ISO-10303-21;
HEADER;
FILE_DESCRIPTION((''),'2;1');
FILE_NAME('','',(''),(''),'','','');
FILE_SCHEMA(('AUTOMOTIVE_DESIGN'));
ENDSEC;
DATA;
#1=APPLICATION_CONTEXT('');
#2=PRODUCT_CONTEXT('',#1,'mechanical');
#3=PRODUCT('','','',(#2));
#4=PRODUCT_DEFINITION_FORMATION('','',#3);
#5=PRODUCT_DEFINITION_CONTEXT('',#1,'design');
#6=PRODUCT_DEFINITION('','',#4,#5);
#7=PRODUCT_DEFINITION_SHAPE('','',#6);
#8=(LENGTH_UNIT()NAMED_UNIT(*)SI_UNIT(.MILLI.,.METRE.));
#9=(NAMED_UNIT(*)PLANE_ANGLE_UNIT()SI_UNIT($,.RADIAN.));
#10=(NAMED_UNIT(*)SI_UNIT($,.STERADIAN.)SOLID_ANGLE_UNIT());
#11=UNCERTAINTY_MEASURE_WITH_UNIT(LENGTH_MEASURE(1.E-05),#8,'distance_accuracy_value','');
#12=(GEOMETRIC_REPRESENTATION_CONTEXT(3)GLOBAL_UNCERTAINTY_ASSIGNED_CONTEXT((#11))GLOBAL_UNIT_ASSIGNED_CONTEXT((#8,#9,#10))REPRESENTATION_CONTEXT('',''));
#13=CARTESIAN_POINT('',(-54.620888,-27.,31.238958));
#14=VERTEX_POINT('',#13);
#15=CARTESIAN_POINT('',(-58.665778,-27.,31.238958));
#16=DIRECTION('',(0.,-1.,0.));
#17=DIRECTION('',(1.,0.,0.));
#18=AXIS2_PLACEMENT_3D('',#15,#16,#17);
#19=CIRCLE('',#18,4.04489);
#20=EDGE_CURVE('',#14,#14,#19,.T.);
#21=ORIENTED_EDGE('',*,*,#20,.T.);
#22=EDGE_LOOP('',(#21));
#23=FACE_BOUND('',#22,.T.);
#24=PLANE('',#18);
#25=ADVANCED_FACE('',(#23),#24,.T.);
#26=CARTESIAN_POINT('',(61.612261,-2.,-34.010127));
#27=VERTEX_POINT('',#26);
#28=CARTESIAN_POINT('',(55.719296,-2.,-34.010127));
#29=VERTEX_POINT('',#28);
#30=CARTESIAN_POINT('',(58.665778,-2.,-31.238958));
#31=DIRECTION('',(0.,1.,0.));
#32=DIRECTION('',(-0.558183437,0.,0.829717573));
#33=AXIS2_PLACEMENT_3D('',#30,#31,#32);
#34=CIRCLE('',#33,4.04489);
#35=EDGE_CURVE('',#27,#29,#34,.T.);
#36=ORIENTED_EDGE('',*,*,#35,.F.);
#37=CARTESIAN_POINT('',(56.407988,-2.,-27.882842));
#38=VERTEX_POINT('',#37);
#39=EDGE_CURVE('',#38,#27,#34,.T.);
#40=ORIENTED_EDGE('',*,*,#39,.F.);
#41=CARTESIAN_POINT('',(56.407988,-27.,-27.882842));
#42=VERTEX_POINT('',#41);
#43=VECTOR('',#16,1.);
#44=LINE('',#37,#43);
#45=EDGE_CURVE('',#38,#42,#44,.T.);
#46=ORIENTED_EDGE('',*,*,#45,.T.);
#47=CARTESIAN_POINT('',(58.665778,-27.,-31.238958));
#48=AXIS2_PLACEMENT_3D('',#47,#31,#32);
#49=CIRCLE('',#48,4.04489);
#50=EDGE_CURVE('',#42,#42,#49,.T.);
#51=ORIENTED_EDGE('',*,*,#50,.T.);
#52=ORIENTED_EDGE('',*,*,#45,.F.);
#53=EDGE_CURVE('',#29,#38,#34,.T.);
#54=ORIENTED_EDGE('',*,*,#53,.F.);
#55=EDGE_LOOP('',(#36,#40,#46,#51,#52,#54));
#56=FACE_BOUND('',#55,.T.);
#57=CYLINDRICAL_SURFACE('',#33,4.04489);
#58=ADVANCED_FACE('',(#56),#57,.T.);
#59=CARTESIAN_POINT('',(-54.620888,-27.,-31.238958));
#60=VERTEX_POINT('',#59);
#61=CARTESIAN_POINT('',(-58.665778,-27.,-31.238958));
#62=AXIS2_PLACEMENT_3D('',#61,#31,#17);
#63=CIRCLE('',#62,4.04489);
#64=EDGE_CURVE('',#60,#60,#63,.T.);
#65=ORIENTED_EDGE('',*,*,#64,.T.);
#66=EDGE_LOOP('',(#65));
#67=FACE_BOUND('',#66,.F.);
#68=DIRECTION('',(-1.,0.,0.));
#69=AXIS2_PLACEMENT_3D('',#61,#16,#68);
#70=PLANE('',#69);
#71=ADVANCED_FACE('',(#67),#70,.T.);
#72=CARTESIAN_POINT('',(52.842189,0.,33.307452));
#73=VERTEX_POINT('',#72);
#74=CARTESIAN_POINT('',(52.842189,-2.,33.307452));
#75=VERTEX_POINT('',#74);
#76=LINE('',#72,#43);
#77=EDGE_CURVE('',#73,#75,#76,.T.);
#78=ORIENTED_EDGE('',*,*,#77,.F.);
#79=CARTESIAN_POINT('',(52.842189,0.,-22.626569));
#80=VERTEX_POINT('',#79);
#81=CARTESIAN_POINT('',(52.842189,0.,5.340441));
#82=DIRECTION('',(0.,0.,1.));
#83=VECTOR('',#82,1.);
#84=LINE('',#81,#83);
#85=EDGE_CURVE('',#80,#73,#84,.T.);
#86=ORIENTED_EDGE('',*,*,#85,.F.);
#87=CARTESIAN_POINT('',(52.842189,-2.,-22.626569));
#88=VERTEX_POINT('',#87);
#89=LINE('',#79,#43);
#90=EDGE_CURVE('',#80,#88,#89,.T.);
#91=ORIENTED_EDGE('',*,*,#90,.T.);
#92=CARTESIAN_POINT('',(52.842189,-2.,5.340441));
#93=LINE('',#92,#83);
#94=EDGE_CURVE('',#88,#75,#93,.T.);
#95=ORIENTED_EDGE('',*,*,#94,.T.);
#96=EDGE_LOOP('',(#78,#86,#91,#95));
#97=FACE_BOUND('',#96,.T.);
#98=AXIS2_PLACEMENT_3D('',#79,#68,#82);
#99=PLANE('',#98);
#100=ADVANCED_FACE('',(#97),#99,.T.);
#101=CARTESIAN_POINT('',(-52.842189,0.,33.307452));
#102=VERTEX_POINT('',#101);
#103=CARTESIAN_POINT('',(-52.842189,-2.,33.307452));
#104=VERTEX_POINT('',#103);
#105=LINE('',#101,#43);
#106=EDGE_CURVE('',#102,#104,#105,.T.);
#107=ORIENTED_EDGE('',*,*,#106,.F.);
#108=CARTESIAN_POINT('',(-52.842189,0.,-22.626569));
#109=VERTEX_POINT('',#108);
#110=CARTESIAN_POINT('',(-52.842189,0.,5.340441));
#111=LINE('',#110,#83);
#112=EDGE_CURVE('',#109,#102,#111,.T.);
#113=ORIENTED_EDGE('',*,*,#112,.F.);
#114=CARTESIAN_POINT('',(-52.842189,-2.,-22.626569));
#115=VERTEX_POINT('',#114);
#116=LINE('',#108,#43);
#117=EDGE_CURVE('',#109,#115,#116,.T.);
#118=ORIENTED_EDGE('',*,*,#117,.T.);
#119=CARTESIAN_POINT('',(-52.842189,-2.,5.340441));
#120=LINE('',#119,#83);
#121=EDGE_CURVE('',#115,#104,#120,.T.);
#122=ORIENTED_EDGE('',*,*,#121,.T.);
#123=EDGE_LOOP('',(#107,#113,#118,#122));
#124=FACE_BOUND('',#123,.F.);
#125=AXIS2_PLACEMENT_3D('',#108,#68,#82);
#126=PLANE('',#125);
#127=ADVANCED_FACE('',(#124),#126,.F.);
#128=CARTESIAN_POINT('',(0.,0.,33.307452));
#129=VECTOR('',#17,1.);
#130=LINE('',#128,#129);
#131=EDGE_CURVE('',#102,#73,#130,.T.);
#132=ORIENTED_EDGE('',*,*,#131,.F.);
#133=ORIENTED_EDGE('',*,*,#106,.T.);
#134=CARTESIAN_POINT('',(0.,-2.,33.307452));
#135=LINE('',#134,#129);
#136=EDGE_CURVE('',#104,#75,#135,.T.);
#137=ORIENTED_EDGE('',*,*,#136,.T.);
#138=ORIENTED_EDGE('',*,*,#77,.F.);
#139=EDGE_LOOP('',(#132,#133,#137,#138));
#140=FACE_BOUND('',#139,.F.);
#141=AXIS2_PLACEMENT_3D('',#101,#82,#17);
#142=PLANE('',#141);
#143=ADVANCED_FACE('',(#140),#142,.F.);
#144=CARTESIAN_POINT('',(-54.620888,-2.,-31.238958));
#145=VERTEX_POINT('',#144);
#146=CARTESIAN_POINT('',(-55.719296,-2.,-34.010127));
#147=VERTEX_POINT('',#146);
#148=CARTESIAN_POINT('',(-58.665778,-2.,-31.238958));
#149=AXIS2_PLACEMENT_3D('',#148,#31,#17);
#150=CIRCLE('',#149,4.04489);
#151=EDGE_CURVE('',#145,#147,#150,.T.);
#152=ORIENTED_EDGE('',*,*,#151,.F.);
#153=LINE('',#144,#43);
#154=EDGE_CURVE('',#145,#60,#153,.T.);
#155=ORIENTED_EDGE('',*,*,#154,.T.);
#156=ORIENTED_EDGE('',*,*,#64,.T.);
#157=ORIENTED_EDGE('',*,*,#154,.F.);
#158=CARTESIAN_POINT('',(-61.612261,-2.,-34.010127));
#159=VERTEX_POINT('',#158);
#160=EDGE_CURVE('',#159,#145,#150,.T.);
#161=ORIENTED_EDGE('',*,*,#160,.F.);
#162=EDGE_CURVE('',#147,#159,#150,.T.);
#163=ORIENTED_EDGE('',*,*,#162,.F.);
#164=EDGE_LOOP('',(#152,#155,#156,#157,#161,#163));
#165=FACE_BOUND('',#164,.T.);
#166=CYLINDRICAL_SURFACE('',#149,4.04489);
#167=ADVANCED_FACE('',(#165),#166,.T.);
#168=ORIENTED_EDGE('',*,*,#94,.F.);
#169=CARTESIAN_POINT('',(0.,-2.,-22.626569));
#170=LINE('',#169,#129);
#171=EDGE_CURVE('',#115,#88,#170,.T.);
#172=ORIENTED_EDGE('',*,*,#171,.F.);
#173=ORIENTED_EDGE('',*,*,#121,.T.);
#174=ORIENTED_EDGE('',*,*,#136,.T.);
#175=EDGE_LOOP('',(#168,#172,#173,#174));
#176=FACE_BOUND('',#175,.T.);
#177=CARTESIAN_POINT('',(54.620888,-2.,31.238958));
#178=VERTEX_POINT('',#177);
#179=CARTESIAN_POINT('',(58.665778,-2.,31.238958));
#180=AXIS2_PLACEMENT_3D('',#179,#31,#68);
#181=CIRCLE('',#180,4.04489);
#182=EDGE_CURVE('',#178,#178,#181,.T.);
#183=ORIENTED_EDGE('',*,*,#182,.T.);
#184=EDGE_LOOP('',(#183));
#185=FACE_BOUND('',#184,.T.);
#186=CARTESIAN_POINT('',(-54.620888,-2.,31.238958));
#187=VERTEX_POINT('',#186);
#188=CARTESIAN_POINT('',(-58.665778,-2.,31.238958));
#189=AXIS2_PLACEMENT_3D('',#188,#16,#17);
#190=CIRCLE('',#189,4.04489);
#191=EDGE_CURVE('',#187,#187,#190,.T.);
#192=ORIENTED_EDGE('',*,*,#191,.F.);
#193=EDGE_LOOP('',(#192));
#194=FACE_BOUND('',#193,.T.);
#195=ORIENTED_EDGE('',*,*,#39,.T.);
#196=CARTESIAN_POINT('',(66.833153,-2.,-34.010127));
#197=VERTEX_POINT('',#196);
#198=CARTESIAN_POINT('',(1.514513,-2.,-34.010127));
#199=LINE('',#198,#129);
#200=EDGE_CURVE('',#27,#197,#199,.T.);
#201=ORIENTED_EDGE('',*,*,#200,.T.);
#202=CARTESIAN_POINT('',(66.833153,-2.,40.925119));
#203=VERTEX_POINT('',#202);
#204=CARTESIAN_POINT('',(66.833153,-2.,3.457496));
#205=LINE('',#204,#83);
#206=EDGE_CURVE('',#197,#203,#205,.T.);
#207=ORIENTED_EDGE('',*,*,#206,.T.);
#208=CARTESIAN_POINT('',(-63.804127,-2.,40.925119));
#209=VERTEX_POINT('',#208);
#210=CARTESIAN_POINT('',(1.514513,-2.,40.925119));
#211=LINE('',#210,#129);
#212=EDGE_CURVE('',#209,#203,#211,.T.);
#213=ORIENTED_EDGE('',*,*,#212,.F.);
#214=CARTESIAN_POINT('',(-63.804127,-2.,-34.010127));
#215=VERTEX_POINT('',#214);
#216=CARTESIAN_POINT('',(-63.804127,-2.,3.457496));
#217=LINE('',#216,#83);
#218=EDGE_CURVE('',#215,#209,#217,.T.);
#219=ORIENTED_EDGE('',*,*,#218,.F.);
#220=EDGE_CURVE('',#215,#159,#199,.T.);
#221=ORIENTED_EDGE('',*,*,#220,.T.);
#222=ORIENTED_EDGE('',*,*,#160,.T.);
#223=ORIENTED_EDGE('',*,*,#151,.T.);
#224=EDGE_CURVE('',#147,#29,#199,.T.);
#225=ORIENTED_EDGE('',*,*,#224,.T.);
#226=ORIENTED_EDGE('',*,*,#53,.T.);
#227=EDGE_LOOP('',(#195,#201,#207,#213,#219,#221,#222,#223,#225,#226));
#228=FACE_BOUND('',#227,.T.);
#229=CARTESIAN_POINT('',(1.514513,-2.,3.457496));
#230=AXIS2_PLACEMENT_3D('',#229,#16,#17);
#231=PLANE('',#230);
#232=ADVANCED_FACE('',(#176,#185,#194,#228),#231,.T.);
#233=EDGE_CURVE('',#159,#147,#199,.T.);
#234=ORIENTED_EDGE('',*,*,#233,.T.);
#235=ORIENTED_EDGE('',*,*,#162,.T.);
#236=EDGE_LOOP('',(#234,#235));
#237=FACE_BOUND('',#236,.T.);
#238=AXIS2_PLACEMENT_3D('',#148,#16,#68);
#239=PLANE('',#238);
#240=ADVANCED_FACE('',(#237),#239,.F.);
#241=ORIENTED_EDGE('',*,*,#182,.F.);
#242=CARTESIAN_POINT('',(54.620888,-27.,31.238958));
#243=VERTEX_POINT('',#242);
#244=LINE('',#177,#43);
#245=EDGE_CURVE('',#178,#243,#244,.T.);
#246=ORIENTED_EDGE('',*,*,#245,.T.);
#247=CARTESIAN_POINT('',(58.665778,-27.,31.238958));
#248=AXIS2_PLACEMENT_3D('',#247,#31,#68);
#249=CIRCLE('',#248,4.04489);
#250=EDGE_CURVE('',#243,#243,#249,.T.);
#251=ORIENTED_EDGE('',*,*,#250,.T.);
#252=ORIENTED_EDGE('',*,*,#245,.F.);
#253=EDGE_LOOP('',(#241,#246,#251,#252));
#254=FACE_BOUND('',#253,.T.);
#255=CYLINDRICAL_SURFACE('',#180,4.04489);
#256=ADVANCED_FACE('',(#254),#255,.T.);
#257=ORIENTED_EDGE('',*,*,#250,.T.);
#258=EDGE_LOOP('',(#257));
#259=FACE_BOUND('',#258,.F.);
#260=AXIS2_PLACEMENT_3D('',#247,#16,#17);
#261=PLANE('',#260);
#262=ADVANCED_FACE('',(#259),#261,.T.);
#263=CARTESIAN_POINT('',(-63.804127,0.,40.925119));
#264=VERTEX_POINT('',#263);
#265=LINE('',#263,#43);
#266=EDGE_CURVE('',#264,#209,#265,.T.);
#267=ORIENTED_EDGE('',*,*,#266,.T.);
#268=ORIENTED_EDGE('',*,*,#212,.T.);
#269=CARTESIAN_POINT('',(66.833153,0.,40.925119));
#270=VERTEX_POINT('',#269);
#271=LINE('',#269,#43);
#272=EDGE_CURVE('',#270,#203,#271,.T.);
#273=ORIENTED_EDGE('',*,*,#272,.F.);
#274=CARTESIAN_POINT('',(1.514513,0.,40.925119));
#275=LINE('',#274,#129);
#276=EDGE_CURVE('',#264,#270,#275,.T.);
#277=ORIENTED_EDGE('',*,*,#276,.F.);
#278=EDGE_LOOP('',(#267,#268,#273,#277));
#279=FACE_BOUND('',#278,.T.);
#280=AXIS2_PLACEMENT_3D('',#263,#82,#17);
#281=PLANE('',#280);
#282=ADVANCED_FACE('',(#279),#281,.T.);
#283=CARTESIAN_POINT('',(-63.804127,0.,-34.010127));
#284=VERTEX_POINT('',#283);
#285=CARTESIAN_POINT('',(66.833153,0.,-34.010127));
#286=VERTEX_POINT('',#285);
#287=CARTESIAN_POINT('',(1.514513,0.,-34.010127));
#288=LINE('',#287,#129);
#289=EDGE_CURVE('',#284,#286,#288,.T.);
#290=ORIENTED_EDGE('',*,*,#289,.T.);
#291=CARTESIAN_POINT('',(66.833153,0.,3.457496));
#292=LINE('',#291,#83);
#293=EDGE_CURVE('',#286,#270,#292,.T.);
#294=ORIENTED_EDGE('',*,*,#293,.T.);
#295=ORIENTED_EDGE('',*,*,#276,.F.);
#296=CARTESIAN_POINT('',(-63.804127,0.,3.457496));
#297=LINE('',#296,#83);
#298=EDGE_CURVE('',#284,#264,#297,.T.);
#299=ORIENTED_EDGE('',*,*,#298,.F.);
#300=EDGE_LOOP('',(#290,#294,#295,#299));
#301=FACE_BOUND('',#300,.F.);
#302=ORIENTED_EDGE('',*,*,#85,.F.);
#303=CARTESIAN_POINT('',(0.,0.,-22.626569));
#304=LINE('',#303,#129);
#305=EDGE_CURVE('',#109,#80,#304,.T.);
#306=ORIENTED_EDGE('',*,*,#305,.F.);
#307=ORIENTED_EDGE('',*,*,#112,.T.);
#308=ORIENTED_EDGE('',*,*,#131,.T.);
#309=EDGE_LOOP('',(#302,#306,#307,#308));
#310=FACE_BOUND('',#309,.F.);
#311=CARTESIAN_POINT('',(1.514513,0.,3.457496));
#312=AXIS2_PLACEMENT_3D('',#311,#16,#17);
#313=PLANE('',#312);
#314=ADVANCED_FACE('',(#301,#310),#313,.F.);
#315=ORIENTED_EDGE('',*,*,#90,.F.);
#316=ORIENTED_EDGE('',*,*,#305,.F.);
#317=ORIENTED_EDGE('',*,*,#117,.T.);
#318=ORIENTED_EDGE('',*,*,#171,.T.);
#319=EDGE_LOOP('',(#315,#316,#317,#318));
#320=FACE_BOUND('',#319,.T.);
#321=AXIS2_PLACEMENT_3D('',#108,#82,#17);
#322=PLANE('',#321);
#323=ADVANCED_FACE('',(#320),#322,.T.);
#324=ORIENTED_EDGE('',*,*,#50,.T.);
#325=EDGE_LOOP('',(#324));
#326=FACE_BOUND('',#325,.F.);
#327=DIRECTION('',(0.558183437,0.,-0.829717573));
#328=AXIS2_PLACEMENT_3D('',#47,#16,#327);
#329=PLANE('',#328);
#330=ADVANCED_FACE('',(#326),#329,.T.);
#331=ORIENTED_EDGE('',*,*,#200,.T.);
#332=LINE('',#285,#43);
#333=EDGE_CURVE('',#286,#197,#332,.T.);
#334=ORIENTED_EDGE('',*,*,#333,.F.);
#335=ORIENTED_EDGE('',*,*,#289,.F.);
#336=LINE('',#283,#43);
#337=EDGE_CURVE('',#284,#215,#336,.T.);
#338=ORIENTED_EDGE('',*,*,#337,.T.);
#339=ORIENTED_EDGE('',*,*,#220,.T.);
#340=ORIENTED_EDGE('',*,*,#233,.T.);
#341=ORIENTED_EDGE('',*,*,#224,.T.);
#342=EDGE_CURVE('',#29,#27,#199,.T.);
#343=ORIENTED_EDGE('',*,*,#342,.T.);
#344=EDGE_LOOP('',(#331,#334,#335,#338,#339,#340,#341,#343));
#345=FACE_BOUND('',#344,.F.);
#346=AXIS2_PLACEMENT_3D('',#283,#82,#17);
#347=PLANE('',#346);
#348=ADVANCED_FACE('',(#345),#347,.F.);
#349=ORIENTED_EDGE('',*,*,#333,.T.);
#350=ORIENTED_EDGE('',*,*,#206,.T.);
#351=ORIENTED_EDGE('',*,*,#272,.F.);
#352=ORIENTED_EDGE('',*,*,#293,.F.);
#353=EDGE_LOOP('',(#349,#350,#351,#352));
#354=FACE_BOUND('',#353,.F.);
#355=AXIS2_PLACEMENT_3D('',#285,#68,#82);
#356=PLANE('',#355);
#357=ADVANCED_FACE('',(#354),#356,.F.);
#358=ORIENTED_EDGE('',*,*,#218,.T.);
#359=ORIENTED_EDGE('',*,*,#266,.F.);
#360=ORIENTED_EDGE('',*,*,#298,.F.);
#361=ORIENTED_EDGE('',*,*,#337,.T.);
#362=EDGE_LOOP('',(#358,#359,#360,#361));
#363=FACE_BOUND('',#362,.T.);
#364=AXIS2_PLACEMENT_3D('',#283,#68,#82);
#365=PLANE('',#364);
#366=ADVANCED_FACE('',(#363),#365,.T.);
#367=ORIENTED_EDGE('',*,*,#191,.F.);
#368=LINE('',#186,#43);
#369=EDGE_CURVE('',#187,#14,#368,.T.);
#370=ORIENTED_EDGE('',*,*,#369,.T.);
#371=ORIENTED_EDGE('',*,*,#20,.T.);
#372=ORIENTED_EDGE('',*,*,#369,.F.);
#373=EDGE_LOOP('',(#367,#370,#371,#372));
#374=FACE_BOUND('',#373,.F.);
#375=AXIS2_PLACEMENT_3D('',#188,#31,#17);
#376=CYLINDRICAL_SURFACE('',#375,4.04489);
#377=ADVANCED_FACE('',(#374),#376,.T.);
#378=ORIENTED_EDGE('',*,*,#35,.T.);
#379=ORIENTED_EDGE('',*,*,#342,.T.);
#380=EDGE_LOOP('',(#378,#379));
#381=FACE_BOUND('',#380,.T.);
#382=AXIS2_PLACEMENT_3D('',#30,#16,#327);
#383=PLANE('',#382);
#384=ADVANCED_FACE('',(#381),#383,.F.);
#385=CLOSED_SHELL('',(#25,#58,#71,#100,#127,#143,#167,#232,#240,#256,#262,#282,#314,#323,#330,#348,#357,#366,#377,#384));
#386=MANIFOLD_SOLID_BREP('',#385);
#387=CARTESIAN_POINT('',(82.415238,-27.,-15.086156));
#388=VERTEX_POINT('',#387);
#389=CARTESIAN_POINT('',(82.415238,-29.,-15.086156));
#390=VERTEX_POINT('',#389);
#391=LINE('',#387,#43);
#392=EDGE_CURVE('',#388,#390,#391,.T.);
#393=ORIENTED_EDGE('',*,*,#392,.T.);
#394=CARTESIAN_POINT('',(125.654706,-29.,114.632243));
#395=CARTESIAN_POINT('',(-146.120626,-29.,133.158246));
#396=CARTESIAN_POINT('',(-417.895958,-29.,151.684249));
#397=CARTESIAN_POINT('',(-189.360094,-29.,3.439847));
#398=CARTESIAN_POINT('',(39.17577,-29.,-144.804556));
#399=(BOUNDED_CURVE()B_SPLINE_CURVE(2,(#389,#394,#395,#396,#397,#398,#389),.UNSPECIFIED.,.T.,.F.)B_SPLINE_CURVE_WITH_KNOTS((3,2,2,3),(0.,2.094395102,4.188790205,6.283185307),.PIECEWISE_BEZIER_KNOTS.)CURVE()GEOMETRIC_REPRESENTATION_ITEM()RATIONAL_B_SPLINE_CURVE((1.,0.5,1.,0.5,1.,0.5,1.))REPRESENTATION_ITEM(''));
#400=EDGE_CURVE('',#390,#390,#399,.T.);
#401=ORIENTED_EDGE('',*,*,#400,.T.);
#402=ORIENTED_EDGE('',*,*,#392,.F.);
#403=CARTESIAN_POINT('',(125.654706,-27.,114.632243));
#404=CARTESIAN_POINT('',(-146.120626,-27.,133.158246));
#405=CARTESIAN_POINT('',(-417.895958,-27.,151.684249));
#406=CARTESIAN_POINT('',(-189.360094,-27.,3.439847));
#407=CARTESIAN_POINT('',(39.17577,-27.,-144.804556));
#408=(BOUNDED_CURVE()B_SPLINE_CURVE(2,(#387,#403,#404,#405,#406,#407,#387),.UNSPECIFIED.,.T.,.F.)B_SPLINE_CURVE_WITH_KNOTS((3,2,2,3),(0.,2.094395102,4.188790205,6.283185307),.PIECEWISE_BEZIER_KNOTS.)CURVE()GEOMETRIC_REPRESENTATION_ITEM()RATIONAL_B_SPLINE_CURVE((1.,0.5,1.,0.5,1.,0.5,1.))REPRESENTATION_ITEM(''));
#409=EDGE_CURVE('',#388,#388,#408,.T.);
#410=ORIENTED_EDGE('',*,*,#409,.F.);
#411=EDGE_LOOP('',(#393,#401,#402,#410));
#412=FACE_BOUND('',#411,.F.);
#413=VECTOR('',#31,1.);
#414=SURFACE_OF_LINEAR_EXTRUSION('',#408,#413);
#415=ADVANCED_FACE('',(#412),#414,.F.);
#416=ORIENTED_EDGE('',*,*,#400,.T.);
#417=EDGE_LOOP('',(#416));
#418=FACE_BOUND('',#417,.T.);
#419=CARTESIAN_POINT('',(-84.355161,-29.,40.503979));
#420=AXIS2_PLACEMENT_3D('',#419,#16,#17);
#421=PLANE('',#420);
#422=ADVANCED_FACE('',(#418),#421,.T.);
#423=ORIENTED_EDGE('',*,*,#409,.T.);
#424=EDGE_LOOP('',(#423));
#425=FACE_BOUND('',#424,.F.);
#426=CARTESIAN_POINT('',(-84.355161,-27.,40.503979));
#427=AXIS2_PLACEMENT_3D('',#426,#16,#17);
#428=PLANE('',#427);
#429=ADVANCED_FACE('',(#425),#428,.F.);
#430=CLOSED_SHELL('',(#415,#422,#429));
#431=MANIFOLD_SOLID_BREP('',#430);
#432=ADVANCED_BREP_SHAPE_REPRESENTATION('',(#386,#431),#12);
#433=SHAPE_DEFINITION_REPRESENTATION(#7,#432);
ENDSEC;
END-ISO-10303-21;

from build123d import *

# Parameters (mm, degrees)
F0_W     = 130.637280643
F0_H     = 74.935246259
F0_W_2   = 105.6843772531
F0_H_2   = 55.9340212494
F1_DEPTH = 2
F2_R     = 4.0448903619
F3_DEPTH = 25
F5_DEPTH = 2


# Not quite as in the source:
# - a pattern or mirror of a feature is missing from the dataset's text; its kind, count and spacing are read off the source's solid


with BuildPart() as f1:
    # F0 (on Front) → F1 (new body)
    with BuildSketch(Plane.XZ):
        with Locations((1.5145130455, 3.4574959427)):
            Rectangle(F0_W, F0_H)
        with Locations((0, 5.3404411301)):
            Rectangle(F0_W_2, F0_H_2, mode=Mode.SUBTRACT)
    extrude(amount=F1_DEPTH)

    # F2 (on face) → F3 (join)
    with BuildSketch(Plane.XZ.offset(2)):
        with Locations((-58.6657784879, 31.2389582396)):
            Circle(F2_R)
    f3 = extrude(amount=F3_DEPTH)

    # F3_copies: F3 across plane
    add(f3.mirror(Plane(origin=(0, 0, 0), x_dir=(0, 0, 1), z_dir=(1, 0, 0))))

    # F3_copies1: F3 across plane
    add(f3.mirror(Plane(origin=(0, 0, 0), x_dir=(-1, 0, 0), z_dir=(0, 0, -1))))

    # F3_copies2: F3 across plane
    add(f3.mirror(Plane(origin=(0, 0, 0), x_dir=(0.4700088099, 0, 0.8826617238), z_dir=(0.8826617238, 0, -0.4700088099))))


with BuildPart() as f5:
    # F4 (on face) → F5 (new body)
    with BuildSketch(Plane.XZ.offset(27)):
        with BuildLine():
            add(Edge.make_bspline(
                [(82.4152380228, -15.0861563161), (125.6547061385, 114.6322429601), (-146.1206258445, 133.15824589), (-417.8959578276, 151.6842488199), (-189.3600939602, 3.4398466138), (39.1757699071, -144.8045555923), (82.4152380228, -15.0861563161)],
                knots=[0, 0, 0, 2.0943951024, 2.0943951024, 4.1887902048, 4.1887902048, 6.2831853072, 6.2831853072, 6.2831853072], degree=2, weights=[1, 0.5, 1, 0.5, 1, 0.5, 1]))
        make_face()
    extrude(amount=F5_DEPTH)


solid = Compound([f1.part, f5.part])
